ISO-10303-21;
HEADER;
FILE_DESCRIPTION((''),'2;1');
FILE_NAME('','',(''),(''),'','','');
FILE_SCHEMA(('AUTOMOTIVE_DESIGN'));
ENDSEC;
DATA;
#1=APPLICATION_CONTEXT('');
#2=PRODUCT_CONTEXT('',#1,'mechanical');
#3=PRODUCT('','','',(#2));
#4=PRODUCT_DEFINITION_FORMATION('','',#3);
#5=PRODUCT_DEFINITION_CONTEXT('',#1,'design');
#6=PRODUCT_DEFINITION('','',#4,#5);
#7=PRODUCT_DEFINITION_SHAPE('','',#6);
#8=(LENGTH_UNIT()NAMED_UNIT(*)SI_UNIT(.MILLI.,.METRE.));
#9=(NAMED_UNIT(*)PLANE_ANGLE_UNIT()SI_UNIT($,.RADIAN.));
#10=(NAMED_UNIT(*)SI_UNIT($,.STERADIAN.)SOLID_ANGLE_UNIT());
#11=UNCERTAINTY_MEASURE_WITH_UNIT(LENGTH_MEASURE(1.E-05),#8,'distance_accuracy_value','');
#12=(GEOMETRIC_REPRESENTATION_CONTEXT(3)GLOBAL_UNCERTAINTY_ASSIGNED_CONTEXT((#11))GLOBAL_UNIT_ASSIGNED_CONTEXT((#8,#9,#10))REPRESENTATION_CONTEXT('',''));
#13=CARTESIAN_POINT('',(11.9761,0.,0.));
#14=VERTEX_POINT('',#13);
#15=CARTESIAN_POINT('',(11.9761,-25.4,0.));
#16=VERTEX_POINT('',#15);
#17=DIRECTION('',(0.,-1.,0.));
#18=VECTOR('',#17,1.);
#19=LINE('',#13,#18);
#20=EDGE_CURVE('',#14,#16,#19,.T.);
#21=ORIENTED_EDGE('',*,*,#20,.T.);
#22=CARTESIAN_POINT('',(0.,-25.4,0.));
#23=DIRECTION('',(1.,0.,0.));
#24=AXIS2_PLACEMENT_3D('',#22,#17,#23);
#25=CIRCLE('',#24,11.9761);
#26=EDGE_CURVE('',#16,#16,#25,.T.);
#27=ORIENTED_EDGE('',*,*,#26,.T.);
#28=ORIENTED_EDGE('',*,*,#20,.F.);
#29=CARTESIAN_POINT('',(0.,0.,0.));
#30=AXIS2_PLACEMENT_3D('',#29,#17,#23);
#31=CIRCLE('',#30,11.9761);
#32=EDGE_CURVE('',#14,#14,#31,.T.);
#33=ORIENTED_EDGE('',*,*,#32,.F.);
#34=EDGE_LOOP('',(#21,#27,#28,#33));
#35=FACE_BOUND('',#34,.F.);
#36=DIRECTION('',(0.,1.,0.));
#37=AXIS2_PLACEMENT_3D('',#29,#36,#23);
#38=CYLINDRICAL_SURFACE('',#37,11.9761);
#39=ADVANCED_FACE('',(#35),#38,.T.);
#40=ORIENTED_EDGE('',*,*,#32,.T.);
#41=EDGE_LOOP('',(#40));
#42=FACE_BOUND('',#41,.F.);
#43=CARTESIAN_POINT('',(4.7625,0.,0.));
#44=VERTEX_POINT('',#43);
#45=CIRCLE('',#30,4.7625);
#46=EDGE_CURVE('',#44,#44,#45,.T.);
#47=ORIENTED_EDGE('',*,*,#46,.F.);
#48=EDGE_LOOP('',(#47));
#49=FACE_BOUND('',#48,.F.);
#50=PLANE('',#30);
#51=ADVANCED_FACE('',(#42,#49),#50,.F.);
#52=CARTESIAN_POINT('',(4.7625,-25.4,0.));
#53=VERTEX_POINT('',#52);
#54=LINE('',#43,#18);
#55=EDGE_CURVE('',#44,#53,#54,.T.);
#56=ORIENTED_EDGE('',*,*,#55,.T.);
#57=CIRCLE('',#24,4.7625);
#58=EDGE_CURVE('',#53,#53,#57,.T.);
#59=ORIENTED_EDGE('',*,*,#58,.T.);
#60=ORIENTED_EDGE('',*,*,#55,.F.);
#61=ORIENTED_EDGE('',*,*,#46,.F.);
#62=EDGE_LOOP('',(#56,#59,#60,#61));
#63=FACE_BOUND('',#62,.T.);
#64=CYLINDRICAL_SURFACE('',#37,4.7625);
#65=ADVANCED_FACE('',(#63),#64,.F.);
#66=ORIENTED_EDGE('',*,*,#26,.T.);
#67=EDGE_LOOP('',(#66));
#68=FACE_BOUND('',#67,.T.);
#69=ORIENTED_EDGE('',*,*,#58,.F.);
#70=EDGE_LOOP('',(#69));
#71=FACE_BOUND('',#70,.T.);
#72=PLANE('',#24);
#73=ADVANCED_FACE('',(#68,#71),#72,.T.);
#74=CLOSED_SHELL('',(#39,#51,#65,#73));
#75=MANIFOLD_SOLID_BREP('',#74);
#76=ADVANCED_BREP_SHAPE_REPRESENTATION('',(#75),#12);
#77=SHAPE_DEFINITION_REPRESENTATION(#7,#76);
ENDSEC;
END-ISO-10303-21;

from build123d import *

# Parameters (mm, degrees)
F0_R     = 11.9761
F0_R_2   = 4.7625
F1_DEPTH = 25.4


# Not quite as in the source:
# - a feature names something its author has since deleted; it is built from what else it names


with BuildPart() as f1:
    # F0 (on Front) → F1 (new body)
    with BuildSketch(Plane.XZ):
        Circle(F0_R)
        Circle(F0_R_2, mode=Mode.SUBTRACT)
    extrude(amount=F1_DEPTH)


solid = f1.part
